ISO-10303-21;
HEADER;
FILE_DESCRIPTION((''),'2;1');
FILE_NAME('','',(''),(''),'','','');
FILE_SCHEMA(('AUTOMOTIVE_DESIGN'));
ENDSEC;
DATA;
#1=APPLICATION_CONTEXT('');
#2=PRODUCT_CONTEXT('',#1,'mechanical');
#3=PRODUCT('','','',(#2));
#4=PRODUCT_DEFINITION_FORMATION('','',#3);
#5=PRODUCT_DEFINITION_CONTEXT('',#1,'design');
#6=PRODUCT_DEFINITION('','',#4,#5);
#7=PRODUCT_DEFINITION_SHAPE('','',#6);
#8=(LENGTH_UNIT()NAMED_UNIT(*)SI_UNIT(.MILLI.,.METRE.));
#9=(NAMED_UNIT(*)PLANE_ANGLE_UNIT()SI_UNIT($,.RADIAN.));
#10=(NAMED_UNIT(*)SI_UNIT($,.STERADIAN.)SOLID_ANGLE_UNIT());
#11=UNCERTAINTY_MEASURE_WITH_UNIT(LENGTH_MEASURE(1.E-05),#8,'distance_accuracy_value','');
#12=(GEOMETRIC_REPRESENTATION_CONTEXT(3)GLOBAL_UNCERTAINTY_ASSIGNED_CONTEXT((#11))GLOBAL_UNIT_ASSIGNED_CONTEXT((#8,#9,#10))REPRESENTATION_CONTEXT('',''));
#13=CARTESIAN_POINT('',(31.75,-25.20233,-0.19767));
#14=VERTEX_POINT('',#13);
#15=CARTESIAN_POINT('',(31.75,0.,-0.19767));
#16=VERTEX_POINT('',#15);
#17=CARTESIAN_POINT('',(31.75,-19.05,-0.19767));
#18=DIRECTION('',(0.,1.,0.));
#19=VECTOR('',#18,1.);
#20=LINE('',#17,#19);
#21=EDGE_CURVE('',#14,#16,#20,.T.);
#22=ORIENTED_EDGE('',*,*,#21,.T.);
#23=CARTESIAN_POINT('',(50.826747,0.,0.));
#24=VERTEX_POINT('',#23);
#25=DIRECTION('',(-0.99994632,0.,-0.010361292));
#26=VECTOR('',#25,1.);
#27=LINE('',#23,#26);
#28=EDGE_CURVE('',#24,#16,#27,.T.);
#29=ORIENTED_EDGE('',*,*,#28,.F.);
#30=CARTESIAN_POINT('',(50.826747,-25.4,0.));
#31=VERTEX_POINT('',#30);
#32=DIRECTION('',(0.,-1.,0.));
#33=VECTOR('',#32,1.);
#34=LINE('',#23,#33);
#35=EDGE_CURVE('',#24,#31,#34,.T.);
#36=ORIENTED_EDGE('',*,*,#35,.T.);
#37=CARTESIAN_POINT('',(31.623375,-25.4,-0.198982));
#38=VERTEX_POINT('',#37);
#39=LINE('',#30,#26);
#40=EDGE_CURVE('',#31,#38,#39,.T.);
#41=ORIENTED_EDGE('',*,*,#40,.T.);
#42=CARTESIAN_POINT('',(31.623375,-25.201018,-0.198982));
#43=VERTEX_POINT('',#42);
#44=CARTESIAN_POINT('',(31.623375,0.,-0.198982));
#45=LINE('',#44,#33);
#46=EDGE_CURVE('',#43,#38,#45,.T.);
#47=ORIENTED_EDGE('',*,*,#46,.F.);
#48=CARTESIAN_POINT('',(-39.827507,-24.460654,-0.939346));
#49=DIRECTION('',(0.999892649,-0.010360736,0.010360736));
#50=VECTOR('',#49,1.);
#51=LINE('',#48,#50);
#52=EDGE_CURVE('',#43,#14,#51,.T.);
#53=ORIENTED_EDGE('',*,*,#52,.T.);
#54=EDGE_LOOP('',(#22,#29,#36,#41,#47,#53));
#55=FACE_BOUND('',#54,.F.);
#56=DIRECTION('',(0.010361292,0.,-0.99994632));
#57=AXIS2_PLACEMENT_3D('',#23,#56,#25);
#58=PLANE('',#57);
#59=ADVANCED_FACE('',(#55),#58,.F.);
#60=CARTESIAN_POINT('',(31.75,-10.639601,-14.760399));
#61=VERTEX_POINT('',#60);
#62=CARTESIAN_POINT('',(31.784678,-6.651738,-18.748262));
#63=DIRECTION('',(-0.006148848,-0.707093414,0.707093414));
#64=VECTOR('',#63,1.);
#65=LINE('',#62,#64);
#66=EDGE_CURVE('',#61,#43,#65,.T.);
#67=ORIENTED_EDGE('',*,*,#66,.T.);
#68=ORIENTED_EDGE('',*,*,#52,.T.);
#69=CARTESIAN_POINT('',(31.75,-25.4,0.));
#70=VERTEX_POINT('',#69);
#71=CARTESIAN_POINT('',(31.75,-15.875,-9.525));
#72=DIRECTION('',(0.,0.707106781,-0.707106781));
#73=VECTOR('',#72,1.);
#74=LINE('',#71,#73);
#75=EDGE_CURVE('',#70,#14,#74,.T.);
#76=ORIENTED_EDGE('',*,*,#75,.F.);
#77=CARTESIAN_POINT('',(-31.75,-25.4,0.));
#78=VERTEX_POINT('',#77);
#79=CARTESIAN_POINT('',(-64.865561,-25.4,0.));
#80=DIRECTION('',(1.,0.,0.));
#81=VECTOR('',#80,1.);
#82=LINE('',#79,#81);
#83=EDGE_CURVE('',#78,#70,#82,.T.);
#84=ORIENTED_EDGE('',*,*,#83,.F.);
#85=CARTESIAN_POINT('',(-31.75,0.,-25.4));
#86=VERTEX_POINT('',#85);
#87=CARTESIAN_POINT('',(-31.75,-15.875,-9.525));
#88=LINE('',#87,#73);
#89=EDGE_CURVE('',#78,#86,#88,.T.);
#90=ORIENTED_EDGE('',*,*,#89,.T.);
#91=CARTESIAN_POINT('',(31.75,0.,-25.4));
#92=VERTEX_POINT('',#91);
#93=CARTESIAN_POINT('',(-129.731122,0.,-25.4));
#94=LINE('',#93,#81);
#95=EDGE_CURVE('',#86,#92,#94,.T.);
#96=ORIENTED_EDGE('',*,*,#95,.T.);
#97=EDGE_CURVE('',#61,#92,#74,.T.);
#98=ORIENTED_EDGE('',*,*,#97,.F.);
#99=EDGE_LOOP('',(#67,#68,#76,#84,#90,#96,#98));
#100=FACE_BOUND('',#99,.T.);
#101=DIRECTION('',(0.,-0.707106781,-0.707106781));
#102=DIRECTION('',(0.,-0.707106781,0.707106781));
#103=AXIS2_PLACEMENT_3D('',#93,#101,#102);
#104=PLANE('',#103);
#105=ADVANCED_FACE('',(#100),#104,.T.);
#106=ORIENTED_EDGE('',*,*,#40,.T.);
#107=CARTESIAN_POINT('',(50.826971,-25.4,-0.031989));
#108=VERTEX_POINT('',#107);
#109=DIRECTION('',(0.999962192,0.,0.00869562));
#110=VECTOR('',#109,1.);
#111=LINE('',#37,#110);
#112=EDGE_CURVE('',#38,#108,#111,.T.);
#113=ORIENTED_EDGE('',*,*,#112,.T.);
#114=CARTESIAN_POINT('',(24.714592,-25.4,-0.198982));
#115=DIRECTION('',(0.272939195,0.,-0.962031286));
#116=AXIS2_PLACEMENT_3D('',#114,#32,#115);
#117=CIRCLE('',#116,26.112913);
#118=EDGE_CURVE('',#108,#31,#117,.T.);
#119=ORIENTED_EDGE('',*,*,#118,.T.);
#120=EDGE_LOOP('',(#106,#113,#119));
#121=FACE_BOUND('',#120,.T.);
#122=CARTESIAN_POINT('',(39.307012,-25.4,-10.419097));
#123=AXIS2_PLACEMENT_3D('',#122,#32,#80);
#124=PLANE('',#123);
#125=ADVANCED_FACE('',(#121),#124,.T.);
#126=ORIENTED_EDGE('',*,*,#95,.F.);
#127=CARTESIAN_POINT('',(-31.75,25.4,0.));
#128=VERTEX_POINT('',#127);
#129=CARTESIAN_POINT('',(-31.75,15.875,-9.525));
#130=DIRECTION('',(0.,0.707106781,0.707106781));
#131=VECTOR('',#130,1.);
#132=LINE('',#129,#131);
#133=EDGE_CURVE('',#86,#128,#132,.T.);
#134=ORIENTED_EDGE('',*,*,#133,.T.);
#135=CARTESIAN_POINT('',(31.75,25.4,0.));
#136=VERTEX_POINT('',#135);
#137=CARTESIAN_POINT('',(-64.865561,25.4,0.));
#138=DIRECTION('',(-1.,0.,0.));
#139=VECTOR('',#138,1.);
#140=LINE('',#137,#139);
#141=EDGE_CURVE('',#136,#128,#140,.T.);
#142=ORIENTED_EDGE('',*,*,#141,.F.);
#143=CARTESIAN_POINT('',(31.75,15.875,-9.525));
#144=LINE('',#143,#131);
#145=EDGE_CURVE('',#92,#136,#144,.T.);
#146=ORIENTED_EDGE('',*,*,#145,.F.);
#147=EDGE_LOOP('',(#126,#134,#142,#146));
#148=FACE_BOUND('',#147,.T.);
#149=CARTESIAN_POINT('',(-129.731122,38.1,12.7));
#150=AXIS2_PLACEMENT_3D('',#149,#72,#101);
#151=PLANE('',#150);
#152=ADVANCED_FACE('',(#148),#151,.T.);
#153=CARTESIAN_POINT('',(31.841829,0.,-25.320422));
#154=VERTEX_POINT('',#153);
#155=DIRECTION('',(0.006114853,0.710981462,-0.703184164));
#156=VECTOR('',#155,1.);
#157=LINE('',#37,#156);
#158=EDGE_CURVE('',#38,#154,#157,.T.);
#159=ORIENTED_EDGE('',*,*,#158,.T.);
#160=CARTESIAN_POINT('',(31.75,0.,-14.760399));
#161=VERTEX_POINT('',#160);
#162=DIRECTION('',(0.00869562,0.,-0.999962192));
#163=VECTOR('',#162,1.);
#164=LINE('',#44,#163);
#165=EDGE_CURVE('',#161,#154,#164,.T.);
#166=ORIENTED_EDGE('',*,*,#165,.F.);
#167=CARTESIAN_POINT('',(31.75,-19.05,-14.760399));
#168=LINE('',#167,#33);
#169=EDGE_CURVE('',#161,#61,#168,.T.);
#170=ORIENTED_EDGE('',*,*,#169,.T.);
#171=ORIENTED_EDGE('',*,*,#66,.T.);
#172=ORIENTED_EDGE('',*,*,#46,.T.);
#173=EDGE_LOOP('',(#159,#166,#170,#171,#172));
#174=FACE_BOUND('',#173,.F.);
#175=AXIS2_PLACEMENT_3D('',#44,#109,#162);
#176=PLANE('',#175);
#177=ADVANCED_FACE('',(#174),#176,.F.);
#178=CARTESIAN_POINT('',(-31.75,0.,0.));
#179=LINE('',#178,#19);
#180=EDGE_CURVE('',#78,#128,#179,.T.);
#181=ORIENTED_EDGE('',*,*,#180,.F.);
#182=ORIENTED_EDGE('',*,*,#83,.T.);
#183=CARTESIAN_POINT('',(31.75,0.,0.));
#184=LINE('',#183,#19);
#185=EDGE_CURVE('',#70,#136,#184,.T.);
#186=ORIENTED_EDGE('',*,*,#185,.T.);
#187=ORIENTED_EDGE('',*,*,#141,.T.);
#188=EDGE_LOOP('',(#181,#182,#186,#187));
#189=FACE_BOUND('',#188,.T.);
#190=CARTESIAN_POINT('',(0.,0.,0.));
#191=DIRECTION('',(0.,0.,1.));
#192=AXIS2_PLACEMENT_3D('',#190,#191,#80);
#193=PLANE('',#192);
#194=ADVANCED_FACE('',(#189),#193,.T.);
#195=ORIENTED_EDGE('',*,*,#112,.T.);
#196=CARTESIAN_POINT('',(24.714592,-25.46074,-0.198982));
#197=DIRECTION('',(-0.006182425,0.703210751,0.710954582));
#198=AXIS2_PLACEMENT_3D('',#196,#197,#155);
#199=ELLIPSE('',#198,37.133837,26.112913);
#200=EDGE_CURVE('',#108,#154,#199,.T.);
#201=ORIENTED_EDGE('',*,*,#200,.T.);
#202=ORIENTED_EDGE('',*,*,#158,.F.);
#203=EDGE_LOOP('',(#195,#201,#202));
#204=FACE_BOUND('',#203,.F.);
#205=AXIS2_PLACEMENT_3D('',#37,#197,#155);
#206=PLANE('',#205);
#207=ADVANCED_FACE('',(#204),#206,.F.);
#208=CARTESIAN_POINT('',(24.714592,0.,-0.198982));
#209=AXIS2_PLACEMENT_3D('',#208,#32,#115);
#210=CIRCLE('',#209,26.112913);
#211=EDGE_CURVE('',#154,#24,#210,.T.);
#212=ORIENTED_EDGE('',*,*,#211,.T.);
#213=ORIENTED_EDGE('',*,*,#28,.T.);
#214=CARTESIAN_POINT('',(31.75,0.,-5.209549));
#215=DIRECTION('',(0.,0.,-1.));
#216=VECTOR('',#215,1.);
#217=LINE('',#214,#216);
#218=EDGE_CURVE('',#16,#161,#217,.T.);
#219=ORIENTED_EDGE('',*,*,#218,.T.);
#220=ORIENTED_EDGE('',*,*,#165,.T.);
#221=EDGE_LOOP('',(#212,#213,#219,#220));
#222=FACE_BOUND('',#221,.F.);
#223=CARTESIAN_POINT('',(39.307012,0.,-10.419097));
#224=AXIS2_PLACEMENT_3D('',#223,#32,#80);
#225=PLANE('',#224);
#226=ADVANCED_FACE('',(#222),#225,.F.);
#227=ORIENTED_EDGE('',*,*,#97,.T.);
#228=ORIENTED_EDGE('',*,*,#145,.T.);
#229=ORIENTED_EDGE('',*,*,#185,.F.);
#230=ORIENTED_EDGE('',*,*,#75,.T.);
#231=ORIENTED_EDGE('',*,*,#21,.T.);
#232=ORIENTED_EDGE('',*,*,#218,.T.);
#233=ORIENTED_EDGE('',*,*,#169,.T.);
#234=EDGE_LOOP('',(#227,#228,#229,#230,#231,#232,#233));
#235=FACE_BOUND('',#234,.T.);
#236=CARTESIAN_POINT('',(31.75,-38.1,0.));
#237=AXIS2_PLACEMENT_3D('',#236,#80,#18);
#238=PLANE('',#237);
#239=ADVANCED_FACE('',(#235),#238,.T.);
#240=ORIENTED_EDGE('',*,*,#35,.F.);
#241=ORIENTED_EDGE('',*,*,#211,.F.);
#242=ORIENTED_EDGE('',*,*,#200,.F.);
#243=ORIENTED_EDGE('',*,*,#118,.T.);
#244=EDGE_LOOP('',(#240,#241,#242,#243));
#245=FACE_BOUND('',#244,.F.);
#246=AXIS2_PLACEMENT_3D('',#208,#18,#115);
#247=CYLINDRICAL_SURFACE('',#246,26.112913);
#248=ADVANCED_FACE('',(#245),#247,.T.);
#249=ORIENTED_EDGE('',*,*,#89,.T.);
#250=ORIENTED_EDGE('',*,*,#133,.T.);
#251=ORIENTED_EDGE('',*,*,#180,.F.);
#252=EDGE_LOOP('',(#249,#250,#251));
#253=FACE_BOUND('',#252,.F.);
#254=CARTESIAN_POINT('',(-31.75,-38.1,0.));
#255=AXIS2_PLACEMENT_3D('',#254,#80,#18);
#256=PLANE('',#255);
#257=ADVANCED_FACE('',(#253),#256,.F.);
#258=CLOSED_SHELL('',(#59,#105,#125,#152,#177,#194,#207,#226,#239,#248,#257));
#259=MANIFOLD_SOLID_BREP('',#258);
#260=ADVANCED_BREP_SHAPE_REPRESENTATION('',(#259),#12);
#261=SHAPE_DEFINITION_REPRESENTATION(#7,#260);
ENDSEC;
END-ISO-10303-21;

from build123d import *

# Parameters (mm, degrees)
F0_W        = 63.5
F0_H        = 76.2
F1_DEPTH    = 25.4
F2_T1_DEPTH = 259.462243683
F3_T1_DEPTH = 259.462243683
F5_DEPTH    = 25.4
F7_DEPTH    = 25.4


# Not quite as in the source:
# - a fillet or chamfer that OpenCascade refuses, or shapes differently, is made with other operations: its cross-section is extruded or revolved along the edge and cut away or added


with BuildPart() as f1:
    # F0 (on Top) → F1 (new body)
    with BuildSketch(Plane.XY):
        Rectangle(F0_W, F0_H)
    extrude(amount=-F1_DEPTH)

    # F2: chamfer of 38.1 on 1 edges, made by hand

    # F2_s2 → F2_t1 (cut)
    with BuildSketch(Plane.YZ.offset(-129.7311218415)):
        Polygon((38.1, 12.7), (0, -25.4), (38.1, -25.4), align=None)
    extrude(amount=F2_T1_DEPTH, mode=Mode.SUBTRACT)

    # F3: chamfer of 38.1 on 1 edges, made by hand

    # F3_s2 → F3_t1 (cut)
    with BuildSketch(Plane.YZ.offset(-129.7311218415)):
        Polygon((0, -25.4), (-38.1, 12.7), (-38.1, -25.4), align=None)
    extrude(amount=F3_T1_DEPTH, mode=Mode.SUBTRACT)

    # F4 (on Front) → F5 (join)
    with BuildSketch(Plane.XZ):
        with BuildLine():
            Line((31.6233746707, -0.1989824377), (31.8418294191, -25.3204219043))
            ThreePointArc((31.8418294191, -25.3204219043), (45.6070605547, -15.863879172), (50.8267469704, 0))
            Line((50.8267469704, 0), (31.6233746707, -0.1989824377))
        make_face()
    extrude(amount=F5_DEPTH)

    # F6 (on face) → F7 (cut)
    with BuildSketch(Plane(origin=(31.6192532968, 0, 0.274959404), x_dir=(0, -1, 0), z_dir=(-0.9999621924, 0, -0.0086956199))):
        Polygon((25.4, -0.473959761), (0, -25.5963490453), (25.4, -25.5963490453), align=None)
    extrude(amount=-F7_DEPTH, mode=Mode.SUBTRACT)


solid = f1.part
